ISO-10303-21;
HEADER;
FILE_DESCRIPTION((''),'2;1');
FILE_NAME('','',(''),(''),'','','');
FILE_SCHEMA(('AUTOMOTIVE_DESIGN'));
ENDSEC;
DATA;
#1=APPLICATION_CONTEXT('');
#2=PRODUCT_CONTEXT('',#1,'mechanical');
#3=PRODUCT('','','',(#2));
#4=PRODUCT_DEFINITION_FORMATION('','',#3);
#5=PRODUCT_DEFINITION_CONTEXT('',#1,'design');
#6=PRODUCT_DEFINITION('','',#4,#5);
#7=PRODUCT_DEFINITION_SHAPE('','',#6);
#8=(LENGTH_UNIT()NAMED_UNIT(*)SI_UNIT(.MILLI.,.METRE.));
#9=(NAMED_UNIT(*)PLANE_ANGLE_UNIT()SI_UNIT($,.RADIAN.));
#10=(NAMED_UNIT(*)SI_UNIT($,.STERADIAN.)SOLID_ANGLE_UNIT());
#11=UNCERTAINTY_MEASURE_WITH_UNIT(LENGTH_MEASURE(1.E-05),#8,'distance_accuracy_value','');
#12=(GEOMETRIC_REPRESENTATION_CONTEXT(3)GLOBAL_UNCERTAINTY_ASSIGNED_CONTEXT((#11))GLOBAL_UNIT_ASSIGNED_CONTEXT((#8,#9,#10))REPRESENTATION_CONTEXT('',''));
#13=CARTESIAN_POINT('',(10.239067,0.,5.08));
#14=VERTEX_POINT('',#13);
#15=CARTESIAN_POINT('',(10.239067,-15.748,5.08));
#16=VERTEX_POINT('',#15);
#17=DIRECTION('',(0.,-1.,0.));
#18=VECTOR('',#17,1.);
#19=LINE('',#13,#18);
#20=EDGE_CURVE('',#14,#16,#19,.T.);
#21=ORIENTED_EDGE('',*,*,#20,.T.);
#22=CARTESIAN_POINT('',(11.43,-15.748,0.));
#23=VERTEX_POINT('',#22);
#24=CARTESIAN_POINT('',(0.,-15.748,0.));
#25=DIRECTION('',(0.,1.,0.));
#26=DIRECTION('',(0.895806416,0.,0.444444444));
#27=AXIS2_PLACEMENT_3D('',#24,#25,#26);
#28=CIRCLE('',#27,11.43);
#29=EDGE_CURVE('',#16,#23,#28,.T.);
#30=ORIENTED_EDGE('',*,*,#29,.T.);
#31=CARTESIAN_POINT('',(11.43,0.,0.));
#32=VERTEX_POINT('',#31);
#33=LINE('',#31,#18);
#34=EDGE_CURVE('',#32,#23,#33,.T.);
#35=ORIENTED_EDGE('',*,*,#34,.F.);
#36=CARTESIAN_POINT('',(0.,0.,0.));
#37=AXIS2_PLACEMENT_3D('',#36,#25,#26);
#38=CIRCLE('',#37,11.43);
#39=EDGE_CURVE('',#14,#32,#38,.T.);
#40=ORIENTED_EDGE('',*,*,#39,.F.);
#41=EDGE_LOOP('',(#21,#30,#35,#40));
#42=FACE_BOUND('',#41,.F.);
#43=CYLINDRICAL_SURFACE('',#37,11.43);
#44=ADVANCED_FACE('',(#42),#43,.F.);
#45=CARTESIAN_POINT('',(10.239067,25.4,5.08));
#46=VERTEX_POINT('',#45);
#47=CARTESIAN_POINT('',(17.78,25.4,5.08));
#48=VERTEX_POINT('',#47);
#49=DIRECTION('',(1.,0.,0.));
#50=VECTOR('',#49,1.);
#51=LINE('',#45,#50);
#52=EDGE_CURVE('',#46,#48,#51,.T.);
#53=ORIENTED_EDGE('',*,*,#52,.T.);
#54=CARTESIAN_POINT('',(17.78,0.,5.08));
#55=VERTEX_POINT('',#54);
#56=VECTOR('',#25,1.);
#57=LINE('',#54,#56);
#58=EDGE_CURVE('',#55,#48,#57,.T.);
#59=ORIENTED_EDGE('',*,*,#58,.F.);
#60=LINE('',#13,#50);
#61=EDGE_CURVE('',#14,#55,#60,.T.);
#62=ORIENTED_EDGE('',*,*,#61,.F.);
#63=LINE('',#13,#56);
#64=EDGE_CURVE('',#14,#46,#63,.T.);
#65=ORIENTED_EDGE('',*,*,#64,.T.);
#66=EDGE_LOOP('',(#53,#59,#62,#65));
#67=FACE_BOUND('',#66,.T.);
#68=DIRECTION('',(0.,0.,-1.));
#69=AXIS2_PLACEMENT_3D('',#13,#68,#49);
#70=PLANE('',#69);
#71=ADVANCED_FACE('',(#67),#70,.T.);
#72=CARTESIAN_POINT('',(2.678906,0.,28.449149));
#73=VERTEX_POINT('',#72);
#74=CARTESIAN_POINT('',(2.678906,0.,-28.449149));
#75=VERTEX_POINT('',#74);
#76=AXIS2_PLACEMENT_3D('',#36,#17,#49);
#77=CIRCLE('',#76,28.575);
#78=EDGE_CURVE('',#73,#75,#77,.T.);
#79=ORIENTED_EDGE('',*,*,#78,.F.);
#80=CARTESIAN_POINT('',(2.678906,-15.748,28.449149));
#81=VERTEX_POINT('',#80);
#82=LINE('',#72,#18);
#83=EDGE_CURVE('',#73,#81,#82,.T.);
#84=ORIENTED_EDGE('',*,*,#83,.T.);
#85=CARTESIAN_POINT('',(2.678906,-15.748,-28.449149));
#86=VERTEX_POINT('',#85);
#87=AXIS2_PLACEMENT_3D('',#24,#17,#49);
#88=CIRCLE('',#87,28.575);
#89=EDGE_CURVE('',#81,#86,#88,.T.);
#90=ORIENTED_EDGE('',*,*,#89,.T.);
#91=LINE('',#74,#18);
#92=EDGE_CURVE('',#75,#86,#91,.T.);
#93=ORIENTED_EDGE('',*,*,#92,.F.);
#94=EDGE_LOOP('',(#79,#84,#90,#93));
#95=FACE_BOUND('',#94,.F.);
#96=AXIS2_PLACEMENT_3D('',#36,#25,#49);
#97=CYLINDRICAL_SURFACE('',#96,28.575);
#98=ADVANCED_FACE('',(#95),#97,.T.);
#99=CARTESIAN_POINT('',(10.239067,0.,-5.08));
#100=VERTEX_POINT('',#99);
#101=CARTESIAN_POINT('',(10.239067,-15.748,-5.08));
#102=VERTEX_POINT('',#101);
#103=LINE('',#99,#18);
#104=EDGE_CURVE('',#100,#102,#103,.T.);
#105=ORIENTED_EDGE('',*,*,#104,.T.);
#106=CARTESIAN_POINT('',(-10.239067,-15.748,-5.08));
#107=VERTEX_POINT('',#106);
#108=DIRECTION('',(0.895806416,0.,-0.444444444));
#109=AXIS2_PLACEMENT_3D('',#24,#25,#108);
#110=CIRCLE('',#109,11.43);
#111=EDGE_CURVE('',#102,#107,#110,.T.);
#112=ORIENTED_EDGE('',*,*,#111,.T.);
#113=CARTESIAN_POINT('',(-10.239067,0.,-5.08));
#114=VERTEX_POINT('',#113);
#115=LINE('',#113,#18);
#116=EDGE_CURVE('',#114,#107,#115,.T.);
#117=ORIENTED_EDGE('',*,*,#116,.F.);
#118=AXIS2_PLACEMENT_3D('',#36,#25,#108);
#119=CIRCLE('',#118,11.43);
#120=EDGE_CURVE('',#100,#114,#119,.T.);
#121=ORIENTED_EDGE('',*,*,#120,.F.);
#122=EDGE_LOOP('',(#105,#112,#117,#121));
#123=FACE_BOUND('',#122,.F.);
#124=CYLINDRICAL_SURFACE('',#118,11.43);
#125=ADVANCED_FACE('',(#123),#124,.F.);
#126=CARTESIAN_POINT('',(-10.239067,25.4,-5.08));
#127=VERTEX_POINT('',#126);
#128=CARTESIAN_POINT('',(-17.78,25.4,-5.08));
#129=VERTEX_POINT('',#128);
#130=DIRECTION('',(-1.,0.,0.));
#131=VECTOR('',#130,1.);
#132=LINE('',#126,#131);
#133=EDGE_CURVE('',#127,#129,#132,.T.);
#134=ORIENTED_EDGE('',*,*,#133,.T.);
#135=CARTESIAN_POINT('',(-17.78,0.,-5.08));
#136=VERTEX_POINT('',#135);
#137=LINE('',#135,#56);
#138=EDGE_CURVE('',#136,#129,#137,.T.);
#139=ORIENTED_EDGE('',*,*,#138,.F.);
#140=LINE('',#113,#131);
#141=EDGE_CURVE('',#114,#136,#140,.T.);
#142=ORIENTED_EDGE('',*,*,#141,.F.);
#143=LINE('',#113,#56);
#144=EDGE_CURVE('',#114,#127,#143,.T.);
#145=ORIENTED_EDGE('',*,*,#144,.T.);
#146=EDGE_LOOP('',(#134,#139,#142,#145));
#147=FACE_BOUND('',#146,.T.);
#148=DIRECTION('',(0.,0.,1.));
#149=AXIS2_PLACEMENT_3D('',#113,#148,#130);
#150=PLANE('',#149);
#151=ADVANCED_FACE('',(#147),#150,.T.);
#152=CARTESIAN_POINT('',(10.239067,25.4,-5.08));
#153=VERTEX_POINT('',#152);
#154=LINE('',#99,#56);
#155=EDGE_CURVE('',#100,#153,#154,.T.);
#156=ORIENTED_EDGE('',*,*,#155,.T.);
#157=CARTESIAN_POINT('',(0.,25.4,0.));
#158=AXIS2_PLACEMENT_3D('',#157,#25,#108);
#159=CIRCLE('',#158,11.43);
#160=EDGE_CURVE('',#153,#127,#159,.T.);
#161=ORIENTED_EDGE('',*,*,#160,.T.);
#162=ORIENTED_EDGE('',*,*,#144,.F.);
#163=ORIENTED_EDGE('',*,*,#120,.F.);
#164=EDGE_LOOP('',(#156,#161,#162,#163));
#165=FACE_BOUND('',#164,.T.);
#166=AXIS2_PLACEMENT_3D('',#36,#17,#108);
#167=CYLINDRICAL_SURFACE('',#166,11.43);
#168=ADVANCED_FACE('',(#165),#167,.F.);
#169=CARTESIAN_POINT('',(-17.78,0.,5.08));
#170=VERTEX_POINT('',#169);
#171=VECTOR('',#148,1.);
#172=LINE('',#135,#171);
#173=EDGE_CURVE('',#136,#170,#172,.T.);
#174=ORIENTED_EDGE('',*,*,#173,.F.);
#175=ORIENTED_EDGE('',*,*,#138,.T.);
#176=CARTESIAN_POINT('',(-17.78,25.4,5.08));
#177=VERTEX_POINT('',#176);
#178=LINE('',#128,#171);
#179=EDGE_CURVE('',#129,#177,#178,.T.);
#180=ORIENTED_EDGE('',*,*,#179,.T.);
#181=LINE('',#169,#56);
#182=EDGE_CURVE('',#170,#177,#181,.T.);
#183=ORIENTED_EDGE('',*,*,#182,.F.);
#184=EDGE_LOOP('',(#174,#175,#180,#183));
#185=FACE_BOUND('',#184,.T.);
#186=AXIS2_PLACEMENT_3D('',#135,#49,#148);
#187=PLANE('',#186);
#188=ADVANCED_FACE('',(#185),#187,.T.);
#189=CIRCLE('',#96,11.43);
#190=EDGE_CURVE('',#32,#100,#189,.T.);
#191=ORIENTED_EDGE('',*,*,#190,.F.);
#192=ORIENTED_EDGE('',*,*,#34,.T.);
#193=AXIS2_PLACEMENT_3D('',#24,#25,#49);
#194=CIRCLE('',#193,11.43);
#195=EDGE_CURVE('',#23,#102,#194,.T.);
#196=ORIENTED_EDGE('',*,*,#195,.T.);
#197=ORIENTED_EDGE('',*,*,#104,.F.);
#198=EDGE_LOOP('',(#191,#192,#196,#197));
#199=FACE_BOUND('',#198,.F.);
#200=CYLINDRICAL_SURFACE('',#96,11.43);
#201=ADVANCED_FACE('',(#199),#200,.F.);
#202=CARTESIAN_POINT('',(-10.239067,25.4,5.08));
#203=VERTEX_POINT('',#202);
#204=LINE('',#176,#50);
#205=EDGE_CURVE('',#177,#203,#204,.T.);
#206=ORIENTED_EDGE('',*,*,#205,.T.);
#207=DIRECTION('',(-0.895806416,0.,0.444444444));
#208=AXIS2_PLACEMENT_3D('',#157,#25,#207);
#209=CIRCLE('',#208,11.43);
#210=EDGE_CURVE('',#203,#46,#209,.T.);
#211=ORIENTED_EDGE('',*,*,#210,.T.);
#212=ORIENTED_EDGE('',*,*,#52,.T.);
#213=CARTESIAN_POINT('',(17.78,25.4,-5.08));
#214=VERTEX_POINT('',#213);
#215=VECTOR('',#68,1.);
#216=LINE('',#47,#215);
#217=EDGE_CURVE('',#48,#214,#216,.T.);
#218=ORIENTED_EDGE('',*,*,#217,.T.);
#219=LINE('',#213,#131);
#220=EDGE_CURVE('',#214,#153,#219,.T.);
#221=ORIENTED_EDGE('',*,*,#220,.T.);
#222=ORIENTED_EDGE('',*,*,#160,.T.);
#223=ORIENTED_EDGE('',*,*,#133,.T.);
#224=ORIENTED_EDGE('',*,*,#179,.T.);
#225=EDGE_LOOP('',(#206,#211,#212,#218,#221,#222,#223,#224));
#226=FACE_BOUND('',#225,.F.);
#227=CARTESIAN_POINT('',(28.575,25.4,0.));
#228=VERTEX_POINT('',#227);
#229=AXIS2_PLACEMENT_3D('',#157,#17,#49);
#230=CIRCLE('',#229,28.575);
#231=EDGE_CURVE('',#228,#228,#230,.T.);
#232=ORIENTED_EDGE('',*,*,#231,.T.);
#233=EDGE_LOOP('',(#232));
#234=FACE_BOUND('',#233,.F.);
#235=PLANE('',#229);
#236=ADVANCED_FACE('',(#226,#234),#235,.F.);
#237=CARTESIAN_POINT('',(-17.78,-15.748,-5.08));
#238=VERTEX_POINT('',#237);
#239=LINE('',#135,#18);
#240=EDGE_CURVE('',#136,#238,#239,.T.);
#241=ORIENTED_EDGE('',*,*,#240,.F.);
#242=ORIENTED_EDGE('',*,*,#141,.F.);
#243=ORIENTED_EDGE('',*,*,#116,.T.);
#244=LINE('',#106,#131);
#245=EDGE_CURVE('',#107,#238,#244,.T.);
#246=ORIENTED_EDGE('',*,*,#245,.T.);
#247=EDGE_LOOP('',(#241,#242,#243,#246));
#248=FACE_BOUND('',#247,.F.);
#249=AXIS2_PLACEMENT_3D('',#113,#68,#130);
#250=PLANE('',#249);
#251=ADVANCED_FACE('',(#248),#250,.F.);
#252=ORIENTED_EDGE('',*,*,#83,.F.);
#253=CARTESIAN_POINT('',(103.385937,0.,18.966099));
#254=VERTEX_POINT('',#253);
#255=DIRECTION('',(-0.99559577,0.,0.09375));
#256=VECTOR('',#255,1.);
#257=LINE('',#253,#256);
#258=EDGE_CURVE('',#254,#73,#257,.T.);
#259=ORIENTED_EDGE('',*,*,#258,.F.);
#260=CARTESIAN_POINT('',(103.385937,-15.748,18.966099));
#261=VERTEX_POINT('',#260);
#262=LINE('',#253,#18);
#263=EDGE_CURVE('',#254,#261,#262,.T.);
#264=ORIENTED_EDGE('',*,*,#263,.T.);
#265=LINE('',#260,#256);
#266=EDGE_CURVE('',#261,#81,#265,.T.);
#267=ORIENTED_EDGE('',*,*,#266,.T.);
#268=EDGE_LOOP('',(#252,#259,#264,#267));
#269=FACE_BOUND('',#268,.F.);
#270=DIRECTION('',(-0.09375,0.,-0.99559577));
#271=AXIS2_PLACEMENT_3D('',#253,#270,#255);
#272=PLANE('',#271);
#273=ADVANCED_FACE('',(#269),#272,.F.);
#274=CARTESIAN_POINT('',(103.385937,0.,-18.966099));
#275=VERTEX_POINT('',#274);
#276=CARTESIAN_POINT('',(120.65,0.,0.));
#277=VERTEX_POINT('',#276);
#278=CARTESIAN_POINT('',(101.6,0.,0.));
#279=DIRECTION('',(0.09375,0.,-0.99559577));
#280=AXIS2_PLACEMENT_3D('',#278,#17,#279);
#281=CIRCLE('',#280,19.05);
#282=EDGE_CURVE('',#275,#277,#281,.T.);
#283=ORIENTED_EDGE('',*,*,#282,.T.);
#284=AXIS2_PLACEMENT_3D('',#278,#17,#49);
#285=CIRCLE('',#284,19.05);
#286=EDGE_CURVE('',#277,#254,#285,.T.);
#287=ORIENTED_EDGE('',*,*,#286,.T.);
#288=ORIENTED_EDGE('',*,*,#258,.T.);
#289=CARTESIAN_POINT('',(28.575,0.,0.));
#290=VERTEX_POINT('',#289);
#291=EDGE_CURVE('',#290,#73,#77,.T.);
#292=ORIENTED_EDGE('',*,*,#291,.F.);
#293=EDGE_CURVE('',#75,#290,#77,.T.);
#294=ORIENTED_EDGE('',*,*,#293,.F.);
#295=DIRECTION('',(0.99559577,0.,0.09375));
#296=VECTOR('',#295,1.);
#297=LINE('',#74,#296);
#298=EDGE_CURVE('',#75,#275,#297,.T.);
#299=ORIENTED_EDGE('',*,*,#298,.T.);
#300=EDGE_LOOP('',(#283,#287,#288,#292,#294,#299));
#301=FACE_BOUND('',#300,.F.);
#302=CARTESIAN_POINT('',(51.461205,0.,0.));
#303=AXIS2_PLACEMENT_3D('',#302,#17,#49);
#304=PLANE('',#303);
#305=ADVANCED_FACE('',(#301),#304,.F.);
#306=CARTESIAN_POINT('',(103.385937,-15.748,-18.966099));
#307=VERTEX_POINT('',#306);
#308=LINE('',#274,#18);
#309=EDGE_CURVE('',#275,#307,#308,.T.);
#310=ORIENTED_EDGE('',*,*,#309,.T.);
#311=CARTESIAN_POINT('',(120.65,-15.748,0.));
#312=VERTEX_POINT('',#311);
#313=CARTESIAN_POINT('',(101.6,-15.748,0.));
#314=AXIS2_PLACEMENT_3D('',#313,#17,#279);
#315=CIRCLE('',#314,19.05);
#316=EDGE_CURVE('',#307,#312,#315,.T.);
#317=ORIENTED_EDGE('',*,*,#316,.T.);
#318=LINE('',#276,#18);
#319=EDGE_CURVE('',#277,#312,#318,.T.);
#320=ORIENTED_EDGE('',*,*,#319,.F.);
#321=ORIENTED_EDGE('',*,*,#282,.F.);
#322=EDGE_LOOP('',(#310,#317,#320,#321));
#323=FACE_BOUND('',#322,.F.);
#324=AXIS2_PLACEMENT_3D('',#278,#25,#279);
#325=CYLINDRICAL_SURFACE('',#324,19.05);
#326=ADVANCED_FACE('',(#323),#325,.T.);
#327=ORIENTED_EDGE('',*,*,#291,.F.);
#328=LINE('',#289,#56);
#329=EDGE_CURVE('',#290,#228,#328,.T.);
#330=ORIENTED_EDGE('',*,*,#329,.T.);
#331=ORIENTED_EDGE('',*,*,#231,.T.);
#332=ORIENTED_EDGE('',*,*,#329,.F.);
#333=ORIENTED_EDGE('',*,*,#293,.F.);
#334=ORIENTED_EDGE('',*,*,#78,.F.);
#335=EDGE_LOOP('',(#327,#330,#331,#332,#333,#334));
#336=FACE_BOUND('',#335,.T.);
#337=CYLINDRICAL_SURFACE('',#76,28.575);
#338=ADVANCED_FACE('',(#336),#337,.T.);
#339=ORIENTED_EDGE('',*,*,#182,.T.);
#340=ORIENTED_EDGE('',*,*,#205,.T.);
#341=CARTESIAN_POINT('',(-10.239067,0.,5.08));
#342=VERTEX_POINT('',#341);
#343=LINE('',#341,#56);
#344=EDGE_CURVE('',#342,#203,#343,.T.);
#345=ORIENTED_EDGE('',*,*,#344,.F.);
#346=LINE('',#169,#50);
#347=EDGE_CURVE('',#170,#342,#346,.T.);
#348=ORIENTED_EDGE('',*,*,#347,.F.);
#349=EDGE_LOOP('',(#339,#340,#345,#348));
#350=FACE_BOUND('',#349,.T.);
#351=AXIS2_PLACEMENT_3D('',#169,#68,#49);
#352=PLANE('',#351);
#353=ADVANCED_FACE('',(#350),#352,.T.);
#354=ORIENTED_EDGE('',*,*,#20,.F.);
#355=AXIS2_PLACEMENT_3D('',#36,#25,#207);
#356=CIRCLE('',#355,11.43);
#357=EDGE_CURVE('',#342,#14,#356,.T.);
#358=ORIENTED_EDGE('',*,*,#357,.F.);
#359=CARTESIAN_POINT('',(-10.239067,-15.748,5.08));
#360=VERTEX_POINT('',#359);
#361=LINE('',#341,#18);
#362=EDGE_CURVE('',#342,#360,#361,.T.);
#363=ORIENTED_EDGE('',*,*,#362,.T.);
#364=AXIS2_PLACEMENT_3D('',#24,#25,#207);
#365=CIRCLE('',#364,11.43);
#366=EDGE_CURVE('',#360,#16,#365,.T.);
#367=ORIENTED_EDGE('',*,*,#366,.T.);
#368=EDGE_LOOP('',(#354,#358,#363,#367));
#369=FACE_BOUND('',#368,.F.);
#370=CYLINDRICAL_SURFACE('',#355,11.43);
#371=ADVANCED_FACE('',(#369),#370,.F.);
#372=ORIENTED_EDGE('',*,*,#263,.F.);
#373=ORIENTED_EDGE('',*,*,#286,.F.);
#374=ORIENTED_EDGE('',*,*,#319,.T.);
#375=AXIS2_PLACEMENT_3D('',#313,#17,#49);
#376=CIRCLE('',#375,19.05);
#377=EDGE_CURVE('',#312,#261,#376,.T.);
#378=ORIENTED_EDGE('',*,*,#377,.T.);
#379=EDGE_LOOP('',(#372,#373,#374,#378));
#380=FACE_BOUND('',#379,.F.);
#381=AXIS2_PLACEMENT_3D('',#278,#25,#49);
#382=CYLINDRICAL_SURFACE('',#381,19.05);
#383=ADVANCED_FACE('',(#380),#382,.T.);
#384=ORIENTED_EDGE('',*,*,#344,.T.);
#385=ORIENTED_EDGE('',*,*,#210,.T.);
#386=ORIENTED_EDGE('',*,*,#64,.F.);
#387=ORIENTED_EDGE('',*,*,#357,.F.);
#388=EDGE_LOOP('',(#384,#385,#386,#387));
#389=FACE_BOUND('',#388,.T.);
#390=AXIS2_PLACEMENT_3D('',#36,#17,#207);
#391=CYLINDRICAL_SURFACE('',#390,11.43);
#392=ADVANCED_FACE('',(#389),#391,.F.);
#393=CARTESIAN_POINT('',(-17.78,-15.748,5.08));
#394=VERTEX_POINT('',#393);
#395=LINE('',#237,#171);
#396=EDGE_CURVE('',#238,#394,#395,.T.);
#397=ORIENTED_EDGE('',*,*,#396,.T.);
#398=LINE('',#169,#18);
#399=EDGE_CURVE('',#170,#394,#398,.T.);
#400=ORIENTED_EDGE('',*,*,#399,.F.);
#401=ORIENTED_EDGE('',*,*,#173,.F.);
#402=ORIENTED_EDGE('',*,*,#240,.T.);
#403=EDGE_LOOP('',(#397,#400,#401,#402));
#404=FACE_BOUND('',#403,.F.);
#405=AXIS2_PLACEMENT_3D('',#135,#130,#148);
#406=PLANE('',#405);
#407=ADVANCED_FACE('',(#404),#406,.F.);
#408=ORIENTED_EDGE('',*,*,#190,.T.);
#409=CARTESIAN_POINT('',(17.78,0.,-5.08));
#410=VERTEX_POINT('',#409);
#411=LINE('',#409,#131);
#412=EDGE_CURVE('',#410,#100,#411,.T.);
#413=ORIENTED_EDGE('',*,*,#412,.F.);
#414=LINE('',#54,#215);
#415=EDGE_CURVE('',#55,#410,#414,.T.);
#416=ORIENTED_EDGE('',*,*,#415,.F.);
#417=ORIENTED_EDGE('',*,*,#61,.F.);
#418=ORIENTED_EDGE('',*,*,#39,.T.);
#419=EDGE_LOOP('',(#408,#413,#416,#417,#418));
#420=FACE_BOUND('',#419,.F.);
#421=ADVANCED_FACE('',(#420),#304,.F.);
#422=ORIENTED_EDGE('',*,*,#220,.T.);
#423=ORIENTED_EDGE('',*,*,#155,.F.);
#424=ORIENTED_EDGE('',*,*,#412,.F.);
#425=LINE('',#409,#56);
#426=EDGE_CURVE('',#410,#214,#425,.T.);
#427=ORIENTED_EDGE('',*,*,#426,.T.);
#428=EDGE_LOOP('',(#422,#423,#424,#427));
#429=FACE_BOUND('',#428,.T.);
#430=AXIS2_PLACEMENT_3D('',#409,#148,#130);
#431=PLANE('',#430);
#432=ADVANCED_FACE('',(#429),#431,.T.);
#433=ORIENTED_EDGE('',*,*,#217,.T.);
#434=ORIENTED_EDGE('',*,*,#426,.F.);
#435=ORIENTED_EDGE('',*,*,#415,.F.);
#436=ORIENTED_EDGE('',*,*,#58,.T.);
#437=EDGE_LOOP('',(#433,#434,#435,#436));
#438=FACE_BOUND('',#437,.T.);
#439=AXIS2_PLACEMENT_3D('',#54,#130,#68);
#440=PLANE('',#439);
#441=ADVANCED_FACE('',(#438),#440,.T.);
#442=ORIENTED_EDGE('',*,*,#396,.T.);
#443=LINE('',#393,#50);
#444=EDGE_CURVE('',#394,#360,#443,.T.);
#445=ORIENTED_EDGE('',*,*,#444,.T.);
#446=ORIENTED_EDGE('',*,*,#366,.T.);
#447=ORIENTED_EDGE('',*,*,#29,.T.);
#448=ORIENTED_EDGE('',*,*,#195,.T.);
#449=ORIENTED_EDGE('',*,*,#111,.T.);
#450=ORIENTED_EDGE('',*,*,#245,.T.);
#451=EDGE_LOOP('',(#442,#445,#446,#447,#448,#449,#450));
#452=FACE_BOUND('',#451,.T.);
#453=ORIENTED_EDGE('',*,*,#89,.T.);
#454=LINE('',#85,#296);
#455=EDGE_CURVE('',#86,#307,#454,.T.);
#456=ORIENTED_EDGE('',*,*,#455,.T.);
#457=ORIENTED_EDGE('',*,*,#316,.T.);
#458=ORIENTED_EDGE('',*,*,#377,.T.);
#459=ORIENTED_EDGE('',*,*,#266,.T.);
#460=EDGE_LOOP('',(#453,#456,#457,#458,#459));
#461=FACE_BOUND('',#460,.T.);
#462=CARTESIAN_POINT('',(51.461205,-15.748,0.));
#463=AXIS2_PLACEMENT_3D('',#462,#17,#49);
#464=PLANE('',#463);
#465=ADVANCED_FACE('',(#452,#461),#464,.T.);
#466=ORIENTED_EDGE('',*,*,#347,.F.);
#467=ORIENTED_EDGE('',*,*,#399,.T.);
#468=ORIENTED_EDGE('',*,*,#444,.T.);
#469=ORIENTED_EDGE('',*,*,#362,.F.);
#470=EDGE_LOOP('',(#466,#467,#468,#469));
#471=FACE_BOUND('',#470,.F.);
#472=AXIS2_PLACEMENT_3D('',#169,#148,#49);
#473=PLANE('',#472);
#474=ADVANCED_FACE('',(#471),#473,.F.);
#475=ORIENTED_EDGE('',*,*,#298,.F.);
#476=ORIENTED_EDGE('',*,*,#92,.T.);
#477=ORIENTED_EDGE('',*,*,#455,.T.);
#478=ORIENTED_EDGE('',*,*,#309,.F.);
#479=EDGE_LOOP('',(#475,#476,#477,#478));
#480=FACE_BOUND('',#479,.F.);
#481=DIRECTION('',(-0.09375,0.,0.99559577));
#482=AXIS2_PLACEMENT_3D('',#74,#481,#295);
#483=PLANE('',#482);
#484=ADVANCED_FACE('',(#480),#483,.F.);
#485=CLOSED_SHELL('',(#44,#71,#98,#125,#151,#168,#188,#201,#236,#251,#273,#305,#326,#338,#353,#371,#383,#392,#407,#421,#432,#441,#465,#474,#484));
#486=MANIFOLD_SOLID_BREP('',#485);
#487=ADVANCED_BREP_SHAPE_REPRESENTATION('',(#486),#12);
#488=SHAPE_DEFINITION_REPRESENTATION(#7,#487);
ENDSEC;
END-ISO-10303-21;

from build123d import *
from build123d import SkipClean  # not in build123d's __all__

# Parameters (mm, degrees)
F0_R     = 11.43
F1_DEPTH = 15.748
F2_DEPTH = 25.4


with BuildPart() as f1:
    # F0 (on Front) → F1 (new body)
    with BuildSketch(Plane.XZ):
        with BuildLine():
            ThreePointArc((2.67890625, 28.4491491315), (21.1314974753, 19.2351355455), (28.575, 0))
            ThreePointArc((28.575, 0), (21.1314974753, -19.2351355455), (2.67890625, -28.4491491315))
            Line((2.67890625, -28.4491491315), (103.3859375, -18.966099421))
            ThreePointArc((103.3859375, -18.966099421), (82.55, 0), (103.3859375, 18.966099421))
            Line((103.3859375, 18.966099421), (2.67890625, 28.4491491315))
        make_face()
        with BuildLine():
            ThreePointArc((2.67890625, -28.4491491315), (21.1314974753, -19.2351355455), (28.575, 0))
            ThreePointArc((28.575, 0), (21.1314974753, 19.2351355455), (2.67890625, 28.4491491315))
            ThreePointArc((2.67890625, 28.4491491315), (-28.575, 0), (2.67890625, -28.4491491315))
        make_face()
        with BuildLine():
            ThreePointArc((-10.2390673403, 5.08), (0, 11.43), (10.2390673403, 5.08))
            Line((10.2390673403, 5.08), (17.78, 5.08))
            Line((17.78, 5.08), (17.78, -5.08))
            Line((17.78, -5.08), (10.2390673403, -5.08))
            ThreePointArc((10.2390673403, -5.08), (0, -11.43), (-10.2390673403, -5.08))
            Line((-10.2390673403, -5.08), (-17.78, -5.08))
            Line((-17.78, -5.08), (-17.78, 5.08))
            Line((-17.78, 5.08), (-10.2390673403, 5.08))
        make_face(mode=Mode.SUBTRACT)
        with BuildLine():
            ThreePointArc((120.65, 0), (115.6876649835, 12.823423697), (103.3859375, 18.966099421))
            ThreePointArc((103.3859375, 18.966099421), (82.55, 0), (103.3859375, -18.966099421))
            ThreePointArc((103.3859375, -18.966099421), (115.6876649835, -12.823423697), (120.65, 0))
        make_face()
        with Locations((101.6, 0)):
            Circle(F0_R, mode=Mode.SUBTRACT)
        with Locations((101.6, 0)):
            Circle(F0_R)
        with BuildLine():
            ThreePointArc((10.2390673403, 5.08), (11.1282846769, 2.6088656826), (11.43, 0))
            ThreePointArc((11.43, 0), (11.1282846769, -2.6088656826), (10.2390673403, -5.08))
            Line((10.2390673403, -5.08), (17.78, -5.08))
            Line((17.78, -5.08), (17.78, 5.08))
            Line((17.78, 5.08), (10.2390673403, 5.08))
        make_face()
    extrude(amount=F1_DEPTH)

    # F0 (on Front) → F2 (join)
    with BuildSketch(Plane.XZ):
        with BuildLine():
            ThreePointArc((2.67890625, -28.4491491315), (21.1314974753, -19.2351355455), (28.575, 0))
            ThreePointArc((28.575, 0), (21.1314974753, 19.2351355455), (2.67890625, 28.4491491315))
            ThreePointArc((2.67890625, 28.4491491315), (-28.575, 0), (2.67890625, -28.4491491315))
        make_face()
        with BuildLine():
            ThreePointArc((-10.2390673403, 5.08), (0, 11.43), (10.2390673403, 5.08))
            Line((10.2390673403, 5.08), (17.78, 5.08))
            Line((17.78, 5.08), (17.78, -5.08))
            Line((17.78, -5.08), (10.2390673403, -5.08))
            ThreePointArc((10.2390673403, -5.08), (0, -11.43), (-10.2390673403, -5.08))
            Line((-10.2390673403, -5.08), (-17.78, -5.08))
            Line((-17.78, -5.08), (-17.78, 5.08))
            Line((-17.78, 5.08), (-10.2390673403, 5.08))
        make_face(mode=Mode.SUBTRACT)
    with SkipClean():  # cleaning this boolean's faces spoils the solid; the shape is the same uncleaned
        extrude(amount=-F2_DEPTH)


solid = f1.part
